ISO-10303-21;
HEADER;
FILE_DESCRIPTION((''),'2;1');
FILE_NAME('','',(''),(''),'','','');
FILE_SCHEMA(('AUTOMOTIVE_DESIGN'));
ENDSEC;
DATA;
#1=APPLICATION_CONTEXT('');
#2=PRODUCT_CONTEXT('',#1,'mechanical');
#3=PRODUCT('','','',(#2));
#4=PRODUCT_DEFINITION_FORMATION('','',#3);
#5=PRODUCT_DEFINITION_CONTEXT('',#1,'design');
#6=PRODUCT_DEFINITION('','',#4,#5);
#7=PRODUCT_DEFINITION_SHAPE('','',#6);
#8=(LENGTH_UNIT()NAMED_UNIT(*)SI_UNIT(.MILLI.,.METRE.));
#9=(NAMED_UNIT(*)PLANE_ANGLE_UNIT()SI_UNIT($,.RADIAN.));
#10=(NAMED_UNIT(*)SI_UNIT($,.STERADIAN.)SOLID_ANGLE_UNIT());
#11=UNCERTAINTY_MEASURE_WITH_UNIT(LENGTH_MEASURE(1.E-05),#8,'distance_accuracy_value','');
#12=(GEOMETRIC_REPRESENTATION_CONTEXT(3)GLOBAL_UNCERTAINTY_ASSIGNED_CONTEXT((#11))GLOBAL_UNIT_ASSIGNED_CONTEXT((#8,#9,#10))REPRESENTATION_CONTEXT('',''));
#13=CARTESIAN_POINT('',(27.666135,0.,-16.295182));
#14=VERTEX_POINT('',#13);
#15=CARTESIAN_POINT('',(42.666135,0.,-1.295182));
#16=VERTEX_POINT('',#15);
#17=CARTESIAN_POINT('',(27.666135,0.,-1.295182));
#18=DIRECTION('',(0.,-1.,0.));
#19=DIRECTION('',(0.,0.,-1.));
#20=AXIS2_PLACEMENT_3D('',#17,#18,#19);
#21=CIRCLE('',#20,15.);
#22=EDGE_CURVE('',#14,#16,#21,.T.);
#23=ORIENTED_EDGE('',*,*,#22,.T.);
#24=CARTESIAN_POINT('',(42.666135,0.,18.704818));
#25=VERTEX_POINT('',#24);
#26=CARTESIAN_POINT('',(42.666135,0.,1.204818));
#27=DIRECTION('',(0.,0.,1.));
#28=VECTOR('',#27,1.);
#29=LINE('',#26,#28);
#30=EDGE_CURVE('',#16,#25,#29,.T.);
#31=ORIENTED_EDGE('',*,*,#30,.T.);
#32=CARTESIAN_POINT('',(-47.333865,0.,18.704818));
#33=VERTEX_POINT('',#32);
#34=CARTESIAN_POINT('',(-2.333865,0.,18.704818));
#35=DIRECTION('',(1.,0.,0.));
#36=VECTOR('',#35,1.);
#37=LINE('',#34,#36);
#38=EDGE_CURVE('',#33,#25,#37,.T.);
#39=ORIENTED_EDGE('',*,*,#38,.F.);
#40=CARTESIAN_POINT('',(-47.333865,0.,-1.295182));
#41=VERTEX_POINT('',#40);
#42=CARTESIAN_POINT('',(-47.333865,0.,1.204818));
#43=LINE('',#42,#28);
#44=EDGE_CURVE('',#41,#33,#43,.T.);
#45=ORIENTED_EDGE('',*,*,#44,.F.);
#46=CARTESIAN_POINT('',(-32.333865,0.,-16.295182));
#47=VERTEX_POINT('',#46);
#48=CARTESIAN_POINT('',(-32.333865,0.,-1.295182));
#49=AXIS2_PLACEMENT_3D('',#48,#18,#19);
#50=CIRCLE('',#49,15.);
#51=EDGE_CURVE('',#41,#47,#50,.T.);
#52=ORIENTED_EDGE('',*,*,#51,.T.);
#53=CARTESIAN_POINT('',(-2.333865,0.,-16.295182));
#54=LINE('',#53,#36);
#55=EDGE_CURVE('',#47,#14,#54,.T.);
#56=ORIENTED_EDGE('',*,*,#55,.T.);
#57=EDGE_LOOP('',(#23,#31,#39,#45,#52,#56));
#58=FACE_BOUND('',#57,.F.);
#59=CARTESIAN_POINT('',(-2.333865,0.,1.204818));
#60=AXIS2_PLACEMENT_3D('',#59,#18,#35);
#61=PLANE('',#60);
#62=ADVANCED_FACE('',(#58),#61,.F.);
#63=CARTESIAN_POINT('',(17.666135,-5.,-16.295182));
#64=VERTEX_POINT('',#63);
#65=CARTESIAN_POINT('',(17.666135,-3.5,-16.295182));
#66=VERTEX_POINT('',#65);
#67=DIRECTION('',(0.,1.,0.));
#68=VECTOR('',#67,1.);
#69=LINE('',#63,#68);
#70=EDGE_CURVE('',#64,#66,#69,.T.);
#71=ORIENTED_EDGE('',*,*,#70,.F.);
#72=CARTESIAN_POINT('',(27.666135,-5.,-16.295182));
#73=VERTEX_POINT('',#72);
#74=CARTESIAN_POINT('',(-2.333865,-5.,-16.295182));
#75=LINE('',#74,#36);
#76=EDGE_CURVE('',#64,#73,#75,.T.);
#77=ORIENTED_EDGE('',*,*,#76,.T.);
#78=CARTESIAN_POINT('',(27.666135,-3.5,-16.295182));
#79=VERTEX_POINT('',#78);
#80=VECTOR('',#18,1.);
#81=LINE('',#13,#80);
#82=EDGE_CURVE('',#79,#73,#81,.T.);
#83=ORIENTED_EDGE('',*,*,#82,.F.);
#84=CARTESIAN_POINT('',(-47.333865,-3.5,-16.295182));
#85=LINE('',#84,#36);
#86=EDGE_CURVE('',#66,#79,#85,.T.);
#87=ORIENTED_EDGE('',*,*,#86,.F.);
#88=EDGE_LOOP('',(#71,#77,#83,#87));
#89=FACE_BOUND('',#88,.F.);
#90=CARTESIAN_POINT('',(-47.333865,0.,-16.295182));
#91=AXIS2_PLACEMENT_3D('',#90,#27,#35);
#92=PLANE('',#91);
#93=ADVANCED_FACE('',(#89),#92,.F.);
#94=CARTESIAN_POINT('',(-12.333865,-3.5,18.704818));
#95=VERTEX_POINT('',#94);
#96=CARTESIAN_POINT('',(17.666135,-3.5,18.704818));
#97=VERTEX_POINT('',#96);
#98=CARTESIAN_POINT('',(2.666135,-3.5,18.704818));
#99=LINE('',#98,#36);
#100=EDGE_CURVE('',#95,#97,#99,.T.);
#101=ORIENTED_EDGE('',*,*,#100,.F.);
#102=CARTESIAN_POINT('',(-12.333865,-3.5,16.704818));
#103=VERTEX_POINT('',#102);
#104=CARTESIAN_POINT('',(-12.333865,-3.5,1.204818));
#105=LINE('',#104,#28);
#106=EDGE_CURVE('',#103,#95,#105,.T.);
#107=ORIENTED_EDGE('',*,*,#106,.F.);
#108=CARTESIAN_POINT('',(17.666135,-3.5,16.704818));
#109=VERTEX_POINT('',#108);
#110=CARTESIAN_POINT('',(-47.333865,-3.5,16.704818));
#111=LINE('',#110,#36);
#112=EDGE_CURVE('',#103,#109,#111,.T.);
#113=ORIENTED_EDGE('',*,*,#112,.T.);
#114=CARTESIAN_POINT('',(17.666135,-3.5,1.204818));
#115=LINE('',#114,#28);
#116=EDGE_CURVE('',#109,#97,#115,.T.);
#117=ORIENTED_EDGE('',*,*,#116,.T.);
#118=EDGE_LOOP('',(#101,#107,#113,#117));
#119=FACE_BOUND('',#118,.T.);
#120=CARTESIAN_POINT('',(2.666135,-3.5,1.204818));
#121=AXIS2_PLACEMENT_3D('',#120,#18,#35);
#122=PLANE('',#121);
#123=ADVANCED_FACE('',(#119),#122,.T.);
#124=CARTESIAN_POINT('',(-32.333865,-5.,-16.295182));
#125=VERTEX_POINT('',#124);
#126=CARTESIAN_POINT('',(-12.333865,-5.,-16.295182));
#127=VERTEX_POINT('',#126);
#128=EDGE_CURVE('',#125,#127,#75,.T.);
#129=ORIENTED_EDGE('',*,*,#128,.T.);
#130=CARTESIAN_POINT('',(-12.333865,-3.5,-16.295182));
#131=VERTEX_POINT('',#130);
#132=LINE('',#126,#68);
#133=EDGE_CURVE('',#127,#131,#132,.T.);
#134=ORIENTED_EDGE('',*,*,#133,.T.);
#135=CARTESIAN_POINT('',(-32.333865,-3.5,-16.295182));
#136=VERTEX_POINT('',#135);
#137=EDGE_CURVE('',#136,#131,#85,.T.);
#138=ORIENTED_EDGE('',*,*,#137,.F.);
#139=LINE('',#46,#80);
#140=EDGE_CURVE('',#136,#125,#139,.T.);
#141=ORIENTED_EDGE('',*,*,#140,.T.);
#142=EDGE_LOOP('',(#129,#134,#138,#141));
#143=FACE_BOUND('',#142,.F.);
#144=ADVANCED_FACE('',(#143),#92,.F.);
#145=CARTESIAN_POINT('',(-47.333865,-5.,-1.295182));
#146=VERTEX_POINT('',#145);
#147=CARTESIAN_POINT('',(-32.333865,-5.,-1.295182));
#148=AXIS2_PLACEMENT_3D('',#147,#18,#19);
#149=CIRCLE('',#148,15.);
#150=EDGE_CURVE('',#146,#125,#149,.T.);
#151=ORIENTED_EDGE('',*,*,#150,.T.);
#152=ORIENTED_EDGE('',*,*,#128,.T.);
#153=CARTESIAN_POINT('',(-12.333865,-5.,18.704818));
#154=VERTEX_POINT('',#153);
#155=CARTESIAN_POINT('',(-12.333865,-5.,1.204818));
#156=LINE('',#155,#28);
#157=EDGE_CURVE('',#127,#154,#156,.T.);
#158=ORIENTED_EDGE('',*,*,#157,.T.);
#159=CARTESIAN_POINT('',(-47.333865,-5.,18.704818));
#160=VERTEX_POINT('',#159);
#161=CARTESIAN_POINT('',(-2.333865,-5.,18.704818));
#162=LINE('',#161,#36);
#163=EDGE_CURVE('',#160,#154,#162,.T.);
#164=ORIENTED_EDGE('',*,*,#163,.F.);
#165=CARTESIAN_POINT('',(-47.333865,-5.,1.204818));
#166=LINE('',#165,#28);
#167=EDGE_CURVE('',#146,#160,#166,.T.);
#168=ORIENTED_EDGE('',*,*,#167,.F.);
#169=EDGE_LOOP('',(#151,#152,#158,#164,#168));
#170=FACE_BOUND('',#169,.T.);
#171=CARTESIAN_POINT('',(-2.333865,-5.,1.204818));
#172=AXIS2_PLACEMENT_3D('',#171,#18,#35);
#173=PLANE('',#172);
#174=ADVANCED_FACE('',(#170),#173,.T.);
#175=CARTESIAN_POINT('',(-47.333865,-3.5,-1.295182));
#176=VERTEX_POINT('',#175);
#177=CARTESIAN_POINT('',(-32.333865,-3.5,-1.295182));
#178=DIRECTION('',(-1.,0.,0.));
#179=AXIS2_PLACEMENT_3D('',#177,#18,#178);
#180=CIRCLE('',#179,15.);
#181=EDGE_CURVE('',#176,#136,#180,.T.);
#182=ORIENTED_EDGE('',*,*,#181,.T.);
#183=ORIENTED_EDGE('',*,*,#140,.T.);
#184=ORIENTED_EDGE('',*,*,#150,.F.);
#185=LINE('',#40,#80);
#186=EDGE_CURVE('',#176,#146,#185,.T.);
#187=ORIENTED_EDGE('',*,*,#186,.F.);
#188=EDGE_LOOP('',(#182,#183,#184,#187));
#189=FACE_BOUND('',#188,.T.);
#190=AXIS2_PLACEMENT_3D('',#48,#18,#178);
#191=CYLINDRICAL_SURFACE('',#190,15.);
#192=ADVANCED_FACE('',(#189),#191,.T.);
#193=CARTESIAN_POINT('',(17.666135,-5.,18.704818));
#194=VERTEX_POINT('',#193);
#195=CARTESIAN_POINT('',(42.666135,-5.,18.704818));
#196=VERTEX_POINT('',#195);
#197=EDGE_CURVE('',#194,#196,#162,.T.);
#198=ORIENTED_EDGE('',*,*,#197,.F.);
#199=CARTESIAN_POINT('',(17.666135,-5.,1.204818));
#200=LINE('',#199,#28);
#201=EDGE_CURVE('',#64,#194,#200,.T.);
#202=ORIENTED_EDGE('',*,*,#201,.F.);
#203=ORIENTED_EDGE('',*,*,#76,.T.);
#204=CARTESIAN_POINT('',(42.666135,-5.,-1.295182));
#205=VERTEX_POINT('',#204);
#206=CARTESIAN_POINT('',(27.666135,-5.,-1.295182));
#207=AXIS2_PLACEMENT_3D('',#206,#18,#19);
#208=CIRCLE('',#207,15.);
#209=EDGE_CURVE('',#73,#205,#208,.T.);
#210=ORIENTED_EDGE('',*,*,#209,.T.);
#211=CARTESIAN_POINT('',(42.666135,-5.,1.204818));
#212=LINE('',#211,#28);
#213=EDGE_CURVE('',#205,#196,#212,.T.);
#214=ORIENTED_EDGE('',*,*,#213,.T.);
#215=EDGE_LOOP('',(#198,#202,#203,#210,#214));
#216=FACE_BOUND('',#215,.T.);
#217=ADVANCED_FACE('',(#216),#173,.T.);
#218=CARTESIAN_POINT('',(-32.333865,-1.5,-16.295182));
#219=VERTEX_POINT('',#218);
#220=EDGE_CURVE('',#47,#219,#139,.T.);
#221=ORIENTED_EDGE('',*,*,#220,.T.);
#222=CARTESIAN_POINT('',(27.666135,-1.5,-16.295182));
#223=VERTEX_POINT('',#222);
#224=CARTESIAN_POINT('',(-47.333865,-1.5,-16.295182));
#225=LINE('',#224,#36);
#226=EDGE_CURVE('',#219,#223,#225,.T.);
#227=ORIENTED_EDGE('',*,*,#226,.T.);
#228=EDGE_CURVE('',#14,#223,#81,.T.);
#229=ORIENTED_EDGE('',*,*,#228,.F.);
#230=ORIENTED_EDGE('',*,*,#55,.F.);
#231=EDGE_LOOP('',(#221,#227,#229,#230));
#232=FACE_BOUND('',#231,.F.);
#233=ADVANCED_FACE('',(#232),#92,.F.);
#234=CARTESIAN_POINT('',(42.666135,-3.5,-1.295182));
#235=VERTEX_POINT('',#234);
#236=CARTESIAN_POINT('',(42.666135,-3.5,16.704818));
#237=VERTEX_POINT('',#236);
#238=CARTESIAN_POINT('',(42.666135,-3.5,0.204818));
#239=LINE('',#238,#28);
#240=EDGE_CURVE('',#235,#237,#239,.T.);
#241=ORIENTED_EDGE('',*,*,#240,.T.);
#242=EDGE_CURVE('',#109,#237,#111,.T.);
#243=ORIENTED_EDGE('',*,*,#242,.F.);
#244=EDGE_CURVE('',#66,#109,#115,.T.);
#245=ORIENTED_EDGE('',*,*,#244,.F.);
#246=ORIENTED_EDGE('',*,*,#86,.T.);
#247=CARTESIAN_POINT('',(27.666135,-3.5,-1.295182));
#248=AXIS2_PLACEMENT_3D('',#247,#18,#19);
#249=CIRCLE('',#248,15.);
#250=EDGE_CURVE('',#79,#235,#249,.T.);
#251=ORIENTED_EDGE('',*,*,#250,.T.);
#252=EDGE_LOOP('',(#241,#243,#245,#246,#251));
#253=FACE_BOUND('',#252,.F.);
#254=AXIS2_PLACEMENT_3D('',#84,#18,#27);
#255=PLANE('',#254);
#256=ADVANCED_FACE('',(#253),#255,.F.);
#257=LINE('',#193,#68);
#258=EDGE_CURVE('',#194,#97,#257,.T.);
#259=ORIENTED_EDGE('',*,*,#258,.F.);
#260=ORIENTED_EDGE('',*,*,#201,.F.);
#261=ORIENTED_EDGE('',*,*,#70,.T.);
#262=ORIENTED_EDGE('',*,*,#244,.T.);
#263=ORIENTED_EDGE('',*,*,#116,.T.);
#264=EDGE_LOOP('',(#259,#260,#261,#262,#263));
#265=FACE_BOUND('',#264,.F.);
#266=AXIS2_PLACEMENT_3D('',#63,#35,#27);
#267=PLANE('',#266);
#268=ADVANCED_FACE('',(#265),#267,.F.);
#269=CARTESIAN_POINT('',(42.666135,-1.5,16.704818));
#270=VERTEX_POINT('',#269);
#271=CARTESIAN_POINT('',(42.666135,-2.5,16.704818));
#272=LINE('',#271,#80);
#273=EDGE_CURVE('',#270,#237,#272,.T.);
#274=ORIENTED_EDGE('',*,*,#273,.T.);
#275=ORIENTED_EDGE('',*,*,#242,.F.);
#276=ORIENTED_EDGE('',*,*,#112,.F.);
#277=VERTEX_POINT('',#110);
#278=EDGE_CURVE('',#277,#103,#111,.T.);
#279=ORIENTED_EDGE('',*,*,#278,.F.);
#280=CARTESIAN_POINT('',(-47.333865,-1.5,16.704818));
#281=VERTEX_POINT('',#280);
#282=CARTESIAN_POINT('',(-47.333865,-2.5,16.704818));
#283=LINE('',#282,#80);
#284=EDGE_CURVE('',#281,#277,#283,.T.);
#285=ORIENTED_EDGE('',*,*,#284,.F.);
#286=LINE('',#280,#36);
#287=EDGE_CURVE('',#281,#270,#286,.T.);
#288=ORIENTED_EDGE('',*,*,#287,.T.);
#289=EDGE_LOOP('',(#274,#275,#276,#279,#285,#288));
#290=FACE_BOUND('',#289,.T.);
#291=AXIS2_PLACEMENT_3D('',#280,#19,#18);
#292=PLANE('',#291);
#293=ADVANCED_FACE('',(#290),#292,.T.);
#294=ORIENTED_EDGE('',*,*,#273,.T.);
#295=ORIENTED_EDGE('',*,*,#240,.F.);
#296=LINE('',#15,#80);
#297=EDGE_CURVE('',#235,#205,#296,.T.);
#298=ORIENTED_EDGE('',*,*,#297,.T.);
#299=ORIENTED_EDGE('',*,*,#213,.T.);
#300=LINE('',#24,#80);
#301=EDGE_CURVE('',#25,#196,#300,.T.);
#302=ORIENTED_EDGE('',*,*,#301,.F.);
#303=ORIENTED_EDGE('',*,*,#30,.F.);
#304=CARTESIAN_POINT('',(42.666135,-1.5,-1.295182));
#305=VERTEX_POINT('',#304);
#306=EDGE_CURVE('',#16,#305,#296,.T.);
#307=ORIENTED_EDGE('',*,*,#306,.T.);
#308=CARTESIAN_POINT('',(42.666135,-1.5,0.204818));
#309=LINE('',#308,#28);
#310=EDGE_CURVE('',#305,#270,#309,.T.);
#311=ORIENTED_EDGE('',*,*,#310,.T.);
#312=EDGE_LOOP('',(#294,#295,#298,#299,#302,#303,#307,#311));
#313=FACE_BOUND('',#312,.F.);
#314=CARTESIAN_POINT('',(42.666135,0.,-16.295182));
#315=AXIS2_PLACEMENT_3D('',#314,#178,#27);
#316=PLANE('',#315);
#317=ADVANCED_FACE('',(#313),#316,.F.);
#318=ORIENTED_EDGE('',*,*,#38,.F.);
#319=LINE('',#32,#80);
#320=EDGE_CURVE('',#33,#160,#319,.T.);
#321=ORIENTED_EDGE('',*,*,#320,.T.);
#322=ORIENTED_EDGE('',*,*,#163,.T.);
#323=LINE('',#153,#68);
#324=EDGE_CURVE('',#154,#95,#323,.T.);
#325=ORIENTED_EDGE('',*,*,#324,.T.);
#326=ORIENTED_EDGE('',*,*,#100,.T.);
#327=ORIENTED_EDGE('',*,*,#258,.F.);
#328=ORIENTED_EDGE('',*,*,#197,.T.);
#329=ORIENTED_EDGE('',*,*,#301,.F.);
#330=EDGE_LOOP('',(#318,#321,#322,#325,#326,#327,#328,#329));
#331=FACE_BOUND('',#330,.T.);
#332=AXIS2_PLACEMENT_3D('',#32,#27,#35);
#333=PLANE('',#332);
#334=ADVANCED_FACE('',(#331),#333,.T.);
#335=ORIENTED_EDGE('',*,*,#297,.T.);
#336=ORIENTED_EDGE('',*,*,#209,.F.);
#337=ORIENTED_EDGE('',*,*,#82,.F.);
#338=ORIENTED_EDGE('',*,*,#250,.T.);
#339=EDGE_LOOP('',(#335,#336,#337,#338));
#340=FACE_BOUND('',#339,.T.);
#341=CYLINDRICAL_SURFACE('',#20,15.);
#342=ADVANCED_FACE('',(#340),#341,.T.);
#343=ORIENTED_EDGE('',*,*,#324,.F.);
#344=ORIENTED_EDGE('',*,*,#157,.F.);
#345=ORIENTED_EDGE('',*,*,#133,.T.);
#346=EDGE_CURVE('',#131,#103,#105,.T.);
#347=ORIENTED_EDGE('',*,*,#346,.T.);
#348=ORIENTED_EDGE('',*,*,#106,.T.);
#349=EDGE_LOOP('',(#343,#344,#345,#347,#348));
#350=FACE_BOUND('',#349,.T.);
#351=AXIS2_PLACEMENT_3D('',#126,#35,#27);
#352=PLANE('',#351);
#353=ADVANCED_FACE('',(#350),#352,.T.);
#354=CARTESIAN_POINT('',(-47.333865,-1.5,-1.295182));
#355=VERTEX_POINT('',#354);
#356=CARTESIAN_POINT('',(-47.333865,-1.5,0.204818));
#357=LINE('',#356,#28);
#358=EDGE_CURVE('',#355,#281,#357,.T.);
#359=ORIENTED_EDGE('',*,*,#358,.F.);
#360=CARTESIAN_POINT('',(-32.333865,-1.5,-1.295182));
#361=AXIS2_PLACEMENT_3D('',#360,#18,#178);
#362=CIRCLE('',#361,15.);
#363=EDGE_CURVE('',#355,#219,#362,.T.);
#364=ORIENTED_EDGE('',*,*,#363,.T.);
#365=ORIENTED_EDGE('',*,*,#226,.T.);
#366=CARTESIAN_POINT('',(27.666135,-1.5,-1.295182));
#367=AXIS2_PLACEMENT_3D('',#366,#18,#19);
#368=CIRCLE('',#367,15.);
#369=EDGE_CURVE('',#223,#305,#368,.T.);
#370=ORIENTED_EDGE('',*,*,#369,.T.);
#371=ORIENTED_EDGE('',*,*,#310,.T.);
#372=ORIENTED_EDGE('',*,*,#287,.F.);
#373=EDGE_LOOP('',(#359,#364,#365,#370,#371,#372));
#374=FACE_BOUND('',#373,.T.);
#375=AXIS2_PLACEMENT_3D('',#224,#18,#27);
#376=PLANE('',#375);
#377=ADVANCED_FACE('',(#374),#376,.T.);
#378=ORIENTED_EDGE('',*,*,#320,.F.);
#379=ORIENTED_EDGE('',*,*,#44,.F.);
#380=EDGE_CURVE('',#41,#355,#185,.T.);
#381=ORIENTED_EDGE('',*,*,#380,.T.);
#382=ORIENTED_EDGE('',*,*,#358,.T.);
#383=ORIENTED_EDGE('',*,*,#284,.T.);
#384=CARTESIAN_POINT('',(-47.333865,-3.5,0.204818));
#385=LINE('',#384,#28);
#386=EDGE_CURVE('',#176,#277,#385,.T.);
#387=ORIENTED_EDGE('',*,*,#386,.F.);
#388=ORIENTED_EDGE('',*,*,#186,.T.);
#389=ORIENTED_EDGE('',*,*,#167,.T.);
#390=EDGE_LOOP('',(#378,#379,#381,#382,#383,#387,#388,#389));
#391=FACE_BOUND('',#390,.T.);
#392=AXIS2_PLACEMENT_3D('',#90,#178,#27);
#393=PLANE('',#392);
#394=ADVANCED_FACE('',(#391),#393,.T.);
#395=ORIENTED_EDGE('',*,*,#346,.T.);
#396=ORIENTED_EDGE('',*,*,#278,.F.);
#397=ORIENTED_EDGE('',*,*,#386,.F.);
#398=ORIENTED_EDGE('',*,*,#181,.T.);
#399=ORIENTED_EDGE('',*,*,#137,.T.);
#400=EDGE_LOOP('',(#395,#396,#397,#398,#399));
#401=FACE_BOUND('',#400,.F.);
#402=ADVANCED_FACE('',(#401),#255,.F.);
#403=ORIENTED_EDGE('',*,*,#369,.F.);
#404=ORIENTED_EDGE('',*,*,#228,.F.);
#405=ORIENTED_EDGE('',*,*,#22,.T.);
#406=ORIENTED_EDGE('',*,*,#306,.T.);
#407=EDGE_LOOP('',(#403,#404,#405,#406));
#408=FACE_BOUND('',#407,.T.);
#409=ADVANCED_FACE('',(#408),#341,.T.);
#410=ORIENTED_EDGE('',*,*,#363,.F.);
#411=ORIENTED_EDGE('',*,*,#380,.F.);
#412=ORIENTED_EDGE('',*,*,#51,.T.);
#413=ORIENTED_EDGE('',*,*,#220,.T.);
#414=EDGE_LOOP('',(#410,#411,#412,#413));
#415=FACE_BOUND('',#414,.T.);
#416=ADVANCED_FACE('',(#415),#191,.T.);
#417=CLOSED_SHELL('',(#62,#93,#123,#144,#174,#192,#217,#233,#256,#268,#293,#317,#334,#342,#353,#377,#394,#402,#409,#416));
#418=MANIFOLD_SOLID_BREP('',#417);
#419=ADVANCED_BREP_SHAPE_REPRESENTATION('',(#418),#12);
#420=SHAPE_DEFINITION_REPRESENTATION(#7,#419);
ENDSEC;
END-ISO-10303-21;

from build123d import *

# Parameters (mm, degrees)
F0_W     = 90
F0_H     = 35
F1_DEPTH = 5
F3_R     = 15
F2_W     = 2
F2_H     = 33
F4_DEPTH = 90
F5_W     = 30
F5_H     = 35
F6_DEPTH = 1.5


with BuildPart() as f1:
    # F0 (on Front) → F1 (new body)
    with BuildSketch(Plane.XZ):
        with Locations((-2.3338645697, 1.2048181861)):
            Rectangle(F0_W, F0_H)
    extrude(amount=F1_DEPTH)

    # F3
    f3_edges = [f1.edges().sort_by_distance(p)[0] for p in [
        (42.666135, -2.5, -16.295182),
        (-47.333865, -2.5, -16.295182),
    ]]
    fillet(f3_edges, radius=F3_R)

    # F2 (on face) → F4 (cut)
    with BuildSketch(Plane(origin=(-47.3338645697, 0, 0), x_dir=(0, -1, 0), z_dir=(-1, 0, 0))):
        with Locations((2.5, 0.2048181861)):
            Rectangle(F2_W, F2_H)
    extrude(amount=-F4_DEPTH, mode=Mode.SUBTRACT)

    # F5 (on face) → F6 (cut)
    with BuildSketch(Plane.XZ.offset(5)):
        with Locations((2.6661354303, 1.2048181861)):
            Rectangle(F5_W, F5_H)
    extrude(amount=-F6_DEPTH, mode=Mode.SUBTRACT)


solid = f1.part
